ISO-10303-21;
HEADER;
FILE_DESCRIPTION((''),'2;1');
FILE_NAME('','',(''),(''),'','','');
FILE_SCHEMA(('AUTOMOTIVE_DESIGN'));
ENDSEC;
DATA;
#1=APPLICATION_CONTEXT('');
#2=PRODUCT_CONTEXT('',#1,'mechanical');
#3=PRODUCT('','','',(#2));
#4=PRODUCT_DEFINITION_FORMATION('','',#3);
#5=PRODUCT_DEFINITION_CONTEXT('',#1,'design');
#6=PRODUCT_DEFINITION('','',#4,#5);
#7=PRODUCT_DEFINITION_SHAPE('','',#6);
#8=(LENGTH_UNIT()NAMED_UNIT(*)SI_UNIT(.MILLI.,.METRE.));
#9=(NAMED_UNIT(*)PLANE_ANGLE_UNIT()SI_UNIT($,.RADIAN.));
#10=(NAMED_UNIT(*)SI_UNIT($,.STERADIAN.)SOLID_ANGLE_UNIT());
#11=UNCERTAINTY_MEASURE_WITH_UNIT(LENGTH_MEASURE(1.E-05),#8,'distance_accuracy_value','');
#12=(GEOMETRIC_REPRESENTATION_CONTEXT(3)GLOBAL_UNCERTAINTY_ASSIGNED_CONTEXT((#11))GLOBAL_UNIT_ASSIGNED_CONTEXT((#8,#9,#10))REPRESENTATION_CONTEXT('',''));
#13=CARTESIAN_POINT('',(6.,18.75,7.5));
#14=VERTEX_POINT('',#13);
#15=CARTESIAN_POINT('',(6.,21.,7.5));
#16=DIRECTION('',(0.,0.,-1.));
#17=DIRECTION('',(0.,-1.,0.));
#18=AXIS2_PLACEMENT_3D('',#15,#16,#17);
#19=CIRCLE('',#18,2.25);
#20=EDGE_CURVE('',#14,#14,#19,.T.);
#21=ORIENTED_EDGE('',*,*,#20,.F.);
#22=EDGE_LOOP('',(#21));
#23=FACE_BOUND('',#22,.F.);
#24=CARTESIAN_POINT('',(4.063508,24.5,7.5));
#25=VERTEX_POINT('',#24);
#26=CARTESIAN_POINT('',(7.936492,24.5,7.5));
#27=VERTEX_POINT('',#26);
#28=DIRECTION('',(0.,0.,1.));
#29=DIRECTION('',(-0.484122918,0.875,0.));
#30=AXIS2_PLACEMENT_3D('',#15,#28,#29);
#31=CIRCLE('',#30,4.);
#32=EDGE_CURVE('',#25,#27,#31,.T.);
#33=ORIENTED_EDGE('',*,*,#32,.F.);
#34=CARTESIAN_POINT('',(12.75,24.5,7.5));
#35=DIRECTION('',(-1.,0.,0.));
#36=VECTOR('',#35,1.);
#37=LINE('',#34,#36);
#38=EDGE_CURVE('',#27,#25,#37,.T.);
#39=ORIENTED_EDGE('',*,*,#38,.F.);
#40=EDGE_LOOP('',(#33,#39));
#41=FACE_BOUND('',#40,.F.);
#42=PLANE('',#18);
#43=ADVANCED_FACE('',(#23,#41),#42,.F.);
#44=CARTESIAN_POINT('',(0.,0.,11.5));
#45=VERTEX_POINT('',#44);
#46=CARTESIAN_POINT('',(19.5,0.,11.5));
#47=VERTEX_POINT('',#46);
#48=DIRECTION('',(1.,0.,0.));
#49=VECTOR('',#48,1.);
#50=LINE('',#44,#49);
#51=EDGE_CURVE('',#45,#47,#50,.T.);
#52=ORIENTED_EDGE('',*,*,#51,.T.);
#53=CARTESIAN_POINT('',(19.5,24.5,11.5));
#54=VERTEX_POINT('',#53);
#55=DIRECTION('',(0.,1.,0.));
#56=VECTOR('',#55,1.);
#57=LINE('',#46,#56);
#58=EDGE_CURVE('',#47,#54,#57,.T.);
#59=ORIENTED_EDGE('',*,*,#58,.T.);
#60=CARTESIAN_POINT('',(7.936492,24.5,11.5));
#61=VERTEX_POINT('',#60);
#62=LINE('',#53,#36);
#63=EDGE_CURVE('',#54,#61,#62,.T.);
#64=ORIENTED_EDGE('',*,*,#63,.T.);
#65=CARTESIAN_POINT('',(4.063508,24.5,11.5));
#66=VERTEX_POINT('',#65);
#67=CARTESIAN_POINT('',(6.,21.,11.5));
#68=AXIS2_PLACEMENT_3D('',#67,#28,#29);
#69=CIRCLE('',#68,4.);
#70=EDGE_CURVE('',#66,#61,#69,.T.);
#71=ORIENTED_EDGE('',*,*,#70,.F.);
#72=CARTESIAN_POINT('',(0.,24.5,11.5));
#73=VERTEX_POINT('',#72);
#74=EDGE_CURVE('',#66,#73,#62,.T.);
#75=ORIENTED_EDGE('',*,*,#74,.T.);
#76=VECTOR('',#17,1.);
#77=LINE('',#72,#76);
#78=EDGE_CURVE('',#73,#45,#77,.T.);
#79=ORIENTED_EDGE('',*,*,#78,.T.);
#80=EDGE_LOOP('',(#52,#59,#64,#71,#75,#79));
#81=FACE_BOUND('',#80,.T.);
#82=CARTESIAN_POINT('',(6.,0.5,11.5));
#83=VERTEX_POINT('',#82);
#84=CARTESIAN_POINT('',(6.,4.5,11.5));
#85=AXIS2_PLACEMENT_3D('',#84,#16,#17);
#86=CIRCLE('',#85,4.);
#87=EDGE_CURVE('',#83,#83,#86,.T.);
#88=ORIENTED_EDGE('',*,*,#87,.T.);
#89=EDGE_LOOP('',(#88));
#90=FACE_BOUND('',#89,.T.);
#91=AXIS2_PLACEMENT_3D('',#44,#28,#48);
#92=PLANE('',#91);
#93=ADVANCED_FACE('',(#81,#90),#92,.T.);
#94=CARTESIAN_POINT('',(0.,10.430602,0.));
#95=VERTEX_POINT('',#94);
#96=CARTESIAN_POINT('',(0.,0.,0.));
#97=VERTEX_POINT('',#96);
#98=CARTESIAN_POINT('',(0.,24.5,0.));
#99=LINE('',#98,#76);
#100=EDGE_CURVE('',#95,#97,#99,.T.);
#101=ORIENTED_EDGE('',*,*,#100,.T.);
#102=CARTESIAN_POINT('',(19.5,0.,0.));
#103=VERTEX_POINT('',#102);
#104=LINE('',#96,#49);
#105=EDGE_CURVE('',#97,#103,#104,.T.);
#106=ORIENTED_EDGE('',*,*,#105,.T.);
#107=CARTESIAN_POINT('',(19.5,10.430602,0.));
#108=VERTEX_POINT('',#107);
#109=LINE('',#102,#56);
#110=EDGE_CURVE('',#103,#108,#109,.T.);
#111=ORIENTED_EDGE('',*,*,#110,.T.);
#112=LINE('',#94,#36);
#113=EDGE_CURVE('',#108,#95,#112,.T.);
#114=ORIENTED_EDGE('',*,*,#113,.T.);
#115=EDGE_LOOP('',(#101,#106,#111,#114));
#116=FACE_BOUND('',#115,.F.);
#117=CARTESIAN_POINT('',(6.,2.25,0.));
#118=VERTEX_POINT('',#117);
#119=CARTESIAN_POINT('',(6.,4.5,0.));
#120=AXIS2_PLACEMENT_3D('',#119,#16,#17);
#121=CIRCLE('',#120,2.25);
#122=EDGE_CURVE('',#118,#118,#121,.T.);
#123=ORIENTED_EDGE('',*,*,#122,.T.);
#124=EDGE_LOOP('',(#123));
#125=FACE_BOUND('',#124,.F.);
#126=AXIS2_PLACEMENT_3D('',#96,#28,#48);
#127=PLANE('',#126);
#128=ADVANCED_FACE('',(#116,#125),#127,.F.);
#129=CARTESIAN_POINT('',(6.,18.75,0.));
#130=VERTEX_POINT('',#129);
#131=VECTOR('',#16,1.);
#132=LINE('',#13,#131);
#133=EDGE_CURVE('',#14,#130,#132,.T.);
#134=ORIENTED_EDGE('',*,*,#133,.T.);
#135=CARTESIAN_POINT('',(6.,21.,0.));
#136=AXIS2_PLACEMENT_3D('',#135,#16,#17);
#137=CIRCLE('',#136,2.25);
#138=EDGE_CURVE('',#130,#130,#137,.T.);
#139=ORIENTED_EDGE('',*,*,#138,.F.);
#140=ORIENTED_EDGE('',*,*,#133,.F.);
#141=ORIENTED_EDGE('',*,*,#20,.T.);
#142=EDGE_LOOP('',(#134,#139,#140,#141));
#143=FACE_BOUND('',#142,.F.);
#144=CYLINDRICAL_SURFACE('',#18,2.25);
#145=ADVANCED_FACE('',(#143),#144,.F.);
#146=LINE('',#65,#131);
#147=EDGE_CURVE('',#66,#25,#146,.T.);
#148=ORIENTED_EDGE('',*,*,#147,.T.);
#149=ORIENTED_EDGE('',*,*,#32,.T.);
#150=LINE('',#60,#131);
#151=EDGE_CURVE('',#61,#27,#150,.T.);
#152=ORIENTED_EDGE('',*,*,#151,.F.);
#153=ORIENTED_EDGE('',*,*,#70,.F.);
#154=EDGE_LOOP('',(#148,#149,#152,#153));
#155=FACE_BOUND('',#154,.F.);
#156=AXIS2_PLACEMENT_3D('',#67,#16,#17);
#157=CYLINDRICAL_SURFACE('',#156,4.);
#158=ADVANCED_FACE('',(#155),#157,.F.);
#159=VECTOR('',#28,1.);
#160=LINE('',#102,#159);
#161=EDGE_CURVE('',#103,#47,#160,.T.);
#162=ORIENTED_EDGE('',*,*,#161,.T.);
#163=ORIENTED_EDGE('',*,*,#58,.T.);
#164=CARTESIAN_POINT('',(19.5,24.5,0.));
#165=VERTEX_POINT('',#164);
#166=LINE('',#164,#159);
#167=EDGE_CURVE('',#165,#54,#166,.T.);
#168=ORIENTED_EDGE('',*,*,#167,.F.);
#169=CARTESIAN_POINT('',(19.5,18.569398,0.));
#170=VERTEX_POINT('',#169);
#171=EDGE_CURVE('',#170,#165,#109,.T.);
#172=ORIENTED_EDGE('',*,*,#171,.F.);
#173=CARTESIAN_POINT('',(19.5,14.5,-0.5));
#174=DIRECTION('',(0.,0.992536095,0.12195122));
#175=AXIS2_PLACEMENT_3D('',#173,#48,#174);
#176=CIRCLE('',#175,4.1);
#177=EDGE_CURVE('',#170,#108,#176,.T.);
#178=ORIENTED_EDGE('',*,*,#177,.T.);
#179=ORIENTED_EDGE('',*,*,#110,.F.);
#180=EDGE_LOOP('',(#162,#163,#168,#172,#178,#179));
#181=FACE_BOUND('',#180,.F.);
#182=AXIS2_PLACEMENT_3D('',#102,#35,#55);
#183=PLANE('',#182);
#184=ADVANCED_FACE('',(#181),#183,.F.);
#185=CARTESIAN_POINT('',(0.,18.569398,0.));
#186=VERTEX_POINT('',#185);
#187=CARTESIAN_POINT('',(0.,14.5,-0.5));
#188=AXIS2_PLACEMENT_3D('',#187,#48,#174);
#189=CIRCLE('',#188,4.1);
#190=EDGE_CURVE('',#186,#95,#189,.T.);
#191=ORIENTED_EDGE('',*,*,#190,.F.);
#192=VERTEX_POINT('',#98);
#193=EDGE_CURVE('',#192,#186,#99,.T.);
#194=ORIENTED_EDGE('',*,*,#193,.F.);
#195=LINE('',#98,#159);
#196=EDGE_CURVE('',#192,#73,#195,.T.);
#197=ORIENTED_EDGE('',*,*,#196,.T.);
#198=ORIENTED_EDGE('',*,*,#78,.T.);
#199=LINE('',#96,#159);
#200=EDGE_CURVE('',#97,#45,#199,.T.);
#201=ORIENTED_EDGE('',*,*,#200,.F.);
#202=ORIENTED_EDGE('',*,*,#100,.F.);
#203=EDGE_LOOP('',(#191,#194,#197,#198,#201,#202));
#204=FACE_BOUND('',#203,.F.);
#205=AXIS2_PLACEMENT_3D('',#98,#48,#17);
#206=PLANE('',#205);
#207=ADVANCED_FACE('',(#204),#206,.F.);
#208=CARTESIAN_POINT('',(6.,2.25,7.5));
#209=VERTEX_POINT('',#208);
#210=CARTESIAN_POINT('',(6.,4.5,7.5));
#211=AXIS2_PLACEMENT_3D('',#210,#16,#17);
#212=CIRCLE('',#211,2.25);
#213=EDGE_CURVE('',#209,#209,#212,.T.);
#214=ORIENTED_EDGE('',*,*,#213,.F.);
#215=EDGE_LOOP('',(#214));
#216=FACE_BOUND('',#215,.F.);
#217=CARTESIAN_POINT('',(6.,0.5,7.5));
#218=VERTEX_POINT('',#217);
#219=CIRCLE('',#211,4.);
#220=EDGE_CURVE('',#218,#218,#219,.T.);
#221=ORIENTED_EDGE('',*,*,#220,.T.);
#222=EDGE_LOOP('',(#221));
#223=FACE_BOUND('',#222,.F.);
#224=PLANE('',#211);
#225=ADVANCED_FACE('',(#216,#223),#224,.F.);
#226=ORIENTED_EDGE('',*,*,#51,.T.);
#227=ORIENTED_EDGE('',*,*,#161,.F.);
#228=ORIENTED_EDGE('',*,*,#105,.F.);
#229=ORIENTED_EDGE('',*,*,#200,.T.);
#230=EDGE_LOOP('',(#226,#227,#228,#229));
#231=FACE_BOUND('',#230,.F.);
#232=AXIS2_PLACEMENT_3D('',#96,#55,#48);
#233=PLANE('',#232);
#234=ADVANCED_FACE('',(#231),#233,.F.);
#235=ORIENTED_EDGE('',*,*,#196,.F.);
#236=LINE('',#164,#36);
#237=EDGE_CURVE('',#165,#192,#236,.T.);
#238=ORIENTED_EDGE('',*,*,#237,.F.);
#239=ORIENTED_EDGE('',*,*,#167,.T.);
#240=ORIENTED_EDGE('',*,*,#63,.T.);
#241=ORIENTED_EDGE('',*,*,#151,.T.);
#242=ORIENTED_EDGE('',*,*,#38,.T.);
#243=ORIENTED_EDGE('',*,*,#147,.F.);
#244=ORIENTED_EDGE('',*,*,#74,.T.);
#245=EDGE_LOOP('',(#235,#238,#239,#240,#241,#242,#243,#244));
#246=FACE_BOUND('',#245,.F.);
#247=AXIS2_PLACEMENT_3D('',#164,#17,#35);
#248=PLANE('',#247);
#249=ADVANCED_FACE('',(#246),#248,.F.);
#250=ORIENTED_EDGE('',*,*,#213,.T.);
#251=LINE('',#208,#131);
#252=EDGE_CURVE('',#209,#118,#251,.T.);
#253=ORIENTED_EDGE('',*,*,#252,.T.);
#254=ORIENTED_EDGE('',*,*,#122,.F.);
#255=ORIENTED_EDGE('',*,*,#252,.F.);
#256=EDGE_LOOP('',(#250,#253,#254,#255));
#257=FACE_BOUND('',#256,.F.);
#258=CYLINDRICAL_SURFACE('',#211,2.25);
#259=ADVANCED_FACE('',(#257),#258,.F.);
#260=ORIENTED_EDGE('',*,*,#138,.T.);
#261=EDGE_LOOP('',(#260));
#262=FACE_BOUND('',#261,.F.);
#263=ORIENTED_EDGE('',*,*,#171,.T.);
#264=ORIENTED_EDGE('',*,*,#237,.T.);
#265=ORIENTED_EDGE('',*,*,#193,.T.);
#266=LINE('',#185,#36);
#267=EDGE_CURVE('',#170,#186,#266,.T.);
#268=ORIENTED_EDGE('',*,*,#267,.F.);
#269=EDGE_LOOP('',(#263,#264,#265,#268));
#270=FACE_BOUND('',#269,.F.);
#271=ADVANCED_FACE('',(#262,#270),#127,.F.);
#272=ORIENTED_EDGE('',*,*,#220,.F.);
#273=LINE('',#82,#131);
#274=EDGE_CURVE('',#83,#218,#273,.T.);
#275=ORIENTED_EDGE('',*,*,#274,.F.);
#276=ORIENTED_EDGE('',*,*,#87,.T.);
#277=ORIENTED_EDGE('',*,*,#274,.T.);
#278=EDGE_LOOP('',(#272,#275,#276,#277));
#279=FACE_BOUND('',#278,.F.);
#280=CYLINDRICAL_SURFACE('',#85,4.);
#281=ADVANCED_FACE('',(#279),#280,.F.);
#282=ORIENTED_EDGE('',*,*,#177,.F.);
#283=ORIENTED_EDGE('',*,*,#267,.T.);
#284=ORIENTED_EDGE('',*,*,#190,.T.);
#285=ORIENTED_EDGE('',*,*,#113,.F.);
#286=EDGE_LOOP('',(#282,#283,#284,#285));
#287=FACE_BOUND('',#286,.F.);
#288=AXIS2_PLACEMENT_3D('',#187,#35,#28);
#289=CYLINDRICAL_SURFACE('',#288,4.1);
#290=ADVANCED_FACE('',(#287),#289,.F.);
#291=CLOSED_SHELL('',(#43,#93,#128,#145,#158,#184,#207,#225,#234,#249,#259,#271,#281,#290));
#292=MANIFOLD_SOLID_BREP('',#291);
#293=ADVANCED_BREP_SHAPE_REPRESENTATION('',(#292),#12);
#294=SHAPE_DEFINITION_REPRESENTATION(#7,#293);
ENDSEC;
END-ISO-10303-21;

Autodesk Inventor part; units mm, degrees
ref_plane "YZ Plane" through (0, 0, 0) normal (1, 0, 0) x (0, 1, 0)
ref_plane "XZ Plane" through (0, 0, 0) normal (0, 1, 0) x (-1, 0, 0)
ref_plane "XY Plane" through (0, 0, 0) normal (0, 0, 1) x (1, 0, 0)
sketch "Sketch1" plane through (0, 0, 0) normal (0, 0, 1) x (1, 0, 0)
  line L0 (0, 0) -> (19.5, 0)
  line L1 (19.5, 0) -> (19.5, 24.5)
  line L2 (19.5, 24.5) -> (0, 24.5)
  line L3 (0, 24.5) -> (0, 0)
  dimension "d0" = 24.5
  dimension "d1" = 19.5
extrude "Extrusion1" add sketch "Sketch1" along normal blind 11.5
sketch "Sketch2" plane through (0, 0, 11.5) normal (0, 0, 1) x (1, 0, 0)
  line L0 (0, 0) -> (19.5, 0) projected
  line L1 (0, 24.5) -> (0, 0) projected
  point P0 (6, 21)
  point P1 (6, 4.5)
  dimension "d4" = 4.5
  dimension "d5" = 6
  dimension "d27" = 16.5
hole "Hole1" at (6, 21, 11.5) at (6, 4.5, 11.5) direction (0, 0, -1) diameter 4.5 end up to surface counterbore diameter 8 counterbore depth 4
sketch "Sketch4" plane through (0, 0, 0) normal (-1, 0, 0) x (0, 0, 1)
  line L0 (0, 24.5) -> (0, 0) projected
  line L1 (0, 24.5) -> (11.5, 24.5) projected
  circle A0 centre (-0.5, 14.5) radius 4.1
  dimension "d19" = 8.2
  dimension "d20" = 0.5
  dimension "d21" = 10
extrude "Extrusion3" cut sketch "Sketch4" against normal up to surface (19.5 mm away)
sketch "Sketch5" plane through (6, 21, 7.5) normal (0, 0, 1) x (1, 0, 0)
  circle A0 centre (0, 0) radius 4 projected
  circle A1 centre (0, -16.5) radius 3.5 projected
  circle A2 centre (0, -16.5) radius 2 projected
  point P0 (-6, -21)
properties part number "YIdlerCapLeft" material "ABS Plastic"
